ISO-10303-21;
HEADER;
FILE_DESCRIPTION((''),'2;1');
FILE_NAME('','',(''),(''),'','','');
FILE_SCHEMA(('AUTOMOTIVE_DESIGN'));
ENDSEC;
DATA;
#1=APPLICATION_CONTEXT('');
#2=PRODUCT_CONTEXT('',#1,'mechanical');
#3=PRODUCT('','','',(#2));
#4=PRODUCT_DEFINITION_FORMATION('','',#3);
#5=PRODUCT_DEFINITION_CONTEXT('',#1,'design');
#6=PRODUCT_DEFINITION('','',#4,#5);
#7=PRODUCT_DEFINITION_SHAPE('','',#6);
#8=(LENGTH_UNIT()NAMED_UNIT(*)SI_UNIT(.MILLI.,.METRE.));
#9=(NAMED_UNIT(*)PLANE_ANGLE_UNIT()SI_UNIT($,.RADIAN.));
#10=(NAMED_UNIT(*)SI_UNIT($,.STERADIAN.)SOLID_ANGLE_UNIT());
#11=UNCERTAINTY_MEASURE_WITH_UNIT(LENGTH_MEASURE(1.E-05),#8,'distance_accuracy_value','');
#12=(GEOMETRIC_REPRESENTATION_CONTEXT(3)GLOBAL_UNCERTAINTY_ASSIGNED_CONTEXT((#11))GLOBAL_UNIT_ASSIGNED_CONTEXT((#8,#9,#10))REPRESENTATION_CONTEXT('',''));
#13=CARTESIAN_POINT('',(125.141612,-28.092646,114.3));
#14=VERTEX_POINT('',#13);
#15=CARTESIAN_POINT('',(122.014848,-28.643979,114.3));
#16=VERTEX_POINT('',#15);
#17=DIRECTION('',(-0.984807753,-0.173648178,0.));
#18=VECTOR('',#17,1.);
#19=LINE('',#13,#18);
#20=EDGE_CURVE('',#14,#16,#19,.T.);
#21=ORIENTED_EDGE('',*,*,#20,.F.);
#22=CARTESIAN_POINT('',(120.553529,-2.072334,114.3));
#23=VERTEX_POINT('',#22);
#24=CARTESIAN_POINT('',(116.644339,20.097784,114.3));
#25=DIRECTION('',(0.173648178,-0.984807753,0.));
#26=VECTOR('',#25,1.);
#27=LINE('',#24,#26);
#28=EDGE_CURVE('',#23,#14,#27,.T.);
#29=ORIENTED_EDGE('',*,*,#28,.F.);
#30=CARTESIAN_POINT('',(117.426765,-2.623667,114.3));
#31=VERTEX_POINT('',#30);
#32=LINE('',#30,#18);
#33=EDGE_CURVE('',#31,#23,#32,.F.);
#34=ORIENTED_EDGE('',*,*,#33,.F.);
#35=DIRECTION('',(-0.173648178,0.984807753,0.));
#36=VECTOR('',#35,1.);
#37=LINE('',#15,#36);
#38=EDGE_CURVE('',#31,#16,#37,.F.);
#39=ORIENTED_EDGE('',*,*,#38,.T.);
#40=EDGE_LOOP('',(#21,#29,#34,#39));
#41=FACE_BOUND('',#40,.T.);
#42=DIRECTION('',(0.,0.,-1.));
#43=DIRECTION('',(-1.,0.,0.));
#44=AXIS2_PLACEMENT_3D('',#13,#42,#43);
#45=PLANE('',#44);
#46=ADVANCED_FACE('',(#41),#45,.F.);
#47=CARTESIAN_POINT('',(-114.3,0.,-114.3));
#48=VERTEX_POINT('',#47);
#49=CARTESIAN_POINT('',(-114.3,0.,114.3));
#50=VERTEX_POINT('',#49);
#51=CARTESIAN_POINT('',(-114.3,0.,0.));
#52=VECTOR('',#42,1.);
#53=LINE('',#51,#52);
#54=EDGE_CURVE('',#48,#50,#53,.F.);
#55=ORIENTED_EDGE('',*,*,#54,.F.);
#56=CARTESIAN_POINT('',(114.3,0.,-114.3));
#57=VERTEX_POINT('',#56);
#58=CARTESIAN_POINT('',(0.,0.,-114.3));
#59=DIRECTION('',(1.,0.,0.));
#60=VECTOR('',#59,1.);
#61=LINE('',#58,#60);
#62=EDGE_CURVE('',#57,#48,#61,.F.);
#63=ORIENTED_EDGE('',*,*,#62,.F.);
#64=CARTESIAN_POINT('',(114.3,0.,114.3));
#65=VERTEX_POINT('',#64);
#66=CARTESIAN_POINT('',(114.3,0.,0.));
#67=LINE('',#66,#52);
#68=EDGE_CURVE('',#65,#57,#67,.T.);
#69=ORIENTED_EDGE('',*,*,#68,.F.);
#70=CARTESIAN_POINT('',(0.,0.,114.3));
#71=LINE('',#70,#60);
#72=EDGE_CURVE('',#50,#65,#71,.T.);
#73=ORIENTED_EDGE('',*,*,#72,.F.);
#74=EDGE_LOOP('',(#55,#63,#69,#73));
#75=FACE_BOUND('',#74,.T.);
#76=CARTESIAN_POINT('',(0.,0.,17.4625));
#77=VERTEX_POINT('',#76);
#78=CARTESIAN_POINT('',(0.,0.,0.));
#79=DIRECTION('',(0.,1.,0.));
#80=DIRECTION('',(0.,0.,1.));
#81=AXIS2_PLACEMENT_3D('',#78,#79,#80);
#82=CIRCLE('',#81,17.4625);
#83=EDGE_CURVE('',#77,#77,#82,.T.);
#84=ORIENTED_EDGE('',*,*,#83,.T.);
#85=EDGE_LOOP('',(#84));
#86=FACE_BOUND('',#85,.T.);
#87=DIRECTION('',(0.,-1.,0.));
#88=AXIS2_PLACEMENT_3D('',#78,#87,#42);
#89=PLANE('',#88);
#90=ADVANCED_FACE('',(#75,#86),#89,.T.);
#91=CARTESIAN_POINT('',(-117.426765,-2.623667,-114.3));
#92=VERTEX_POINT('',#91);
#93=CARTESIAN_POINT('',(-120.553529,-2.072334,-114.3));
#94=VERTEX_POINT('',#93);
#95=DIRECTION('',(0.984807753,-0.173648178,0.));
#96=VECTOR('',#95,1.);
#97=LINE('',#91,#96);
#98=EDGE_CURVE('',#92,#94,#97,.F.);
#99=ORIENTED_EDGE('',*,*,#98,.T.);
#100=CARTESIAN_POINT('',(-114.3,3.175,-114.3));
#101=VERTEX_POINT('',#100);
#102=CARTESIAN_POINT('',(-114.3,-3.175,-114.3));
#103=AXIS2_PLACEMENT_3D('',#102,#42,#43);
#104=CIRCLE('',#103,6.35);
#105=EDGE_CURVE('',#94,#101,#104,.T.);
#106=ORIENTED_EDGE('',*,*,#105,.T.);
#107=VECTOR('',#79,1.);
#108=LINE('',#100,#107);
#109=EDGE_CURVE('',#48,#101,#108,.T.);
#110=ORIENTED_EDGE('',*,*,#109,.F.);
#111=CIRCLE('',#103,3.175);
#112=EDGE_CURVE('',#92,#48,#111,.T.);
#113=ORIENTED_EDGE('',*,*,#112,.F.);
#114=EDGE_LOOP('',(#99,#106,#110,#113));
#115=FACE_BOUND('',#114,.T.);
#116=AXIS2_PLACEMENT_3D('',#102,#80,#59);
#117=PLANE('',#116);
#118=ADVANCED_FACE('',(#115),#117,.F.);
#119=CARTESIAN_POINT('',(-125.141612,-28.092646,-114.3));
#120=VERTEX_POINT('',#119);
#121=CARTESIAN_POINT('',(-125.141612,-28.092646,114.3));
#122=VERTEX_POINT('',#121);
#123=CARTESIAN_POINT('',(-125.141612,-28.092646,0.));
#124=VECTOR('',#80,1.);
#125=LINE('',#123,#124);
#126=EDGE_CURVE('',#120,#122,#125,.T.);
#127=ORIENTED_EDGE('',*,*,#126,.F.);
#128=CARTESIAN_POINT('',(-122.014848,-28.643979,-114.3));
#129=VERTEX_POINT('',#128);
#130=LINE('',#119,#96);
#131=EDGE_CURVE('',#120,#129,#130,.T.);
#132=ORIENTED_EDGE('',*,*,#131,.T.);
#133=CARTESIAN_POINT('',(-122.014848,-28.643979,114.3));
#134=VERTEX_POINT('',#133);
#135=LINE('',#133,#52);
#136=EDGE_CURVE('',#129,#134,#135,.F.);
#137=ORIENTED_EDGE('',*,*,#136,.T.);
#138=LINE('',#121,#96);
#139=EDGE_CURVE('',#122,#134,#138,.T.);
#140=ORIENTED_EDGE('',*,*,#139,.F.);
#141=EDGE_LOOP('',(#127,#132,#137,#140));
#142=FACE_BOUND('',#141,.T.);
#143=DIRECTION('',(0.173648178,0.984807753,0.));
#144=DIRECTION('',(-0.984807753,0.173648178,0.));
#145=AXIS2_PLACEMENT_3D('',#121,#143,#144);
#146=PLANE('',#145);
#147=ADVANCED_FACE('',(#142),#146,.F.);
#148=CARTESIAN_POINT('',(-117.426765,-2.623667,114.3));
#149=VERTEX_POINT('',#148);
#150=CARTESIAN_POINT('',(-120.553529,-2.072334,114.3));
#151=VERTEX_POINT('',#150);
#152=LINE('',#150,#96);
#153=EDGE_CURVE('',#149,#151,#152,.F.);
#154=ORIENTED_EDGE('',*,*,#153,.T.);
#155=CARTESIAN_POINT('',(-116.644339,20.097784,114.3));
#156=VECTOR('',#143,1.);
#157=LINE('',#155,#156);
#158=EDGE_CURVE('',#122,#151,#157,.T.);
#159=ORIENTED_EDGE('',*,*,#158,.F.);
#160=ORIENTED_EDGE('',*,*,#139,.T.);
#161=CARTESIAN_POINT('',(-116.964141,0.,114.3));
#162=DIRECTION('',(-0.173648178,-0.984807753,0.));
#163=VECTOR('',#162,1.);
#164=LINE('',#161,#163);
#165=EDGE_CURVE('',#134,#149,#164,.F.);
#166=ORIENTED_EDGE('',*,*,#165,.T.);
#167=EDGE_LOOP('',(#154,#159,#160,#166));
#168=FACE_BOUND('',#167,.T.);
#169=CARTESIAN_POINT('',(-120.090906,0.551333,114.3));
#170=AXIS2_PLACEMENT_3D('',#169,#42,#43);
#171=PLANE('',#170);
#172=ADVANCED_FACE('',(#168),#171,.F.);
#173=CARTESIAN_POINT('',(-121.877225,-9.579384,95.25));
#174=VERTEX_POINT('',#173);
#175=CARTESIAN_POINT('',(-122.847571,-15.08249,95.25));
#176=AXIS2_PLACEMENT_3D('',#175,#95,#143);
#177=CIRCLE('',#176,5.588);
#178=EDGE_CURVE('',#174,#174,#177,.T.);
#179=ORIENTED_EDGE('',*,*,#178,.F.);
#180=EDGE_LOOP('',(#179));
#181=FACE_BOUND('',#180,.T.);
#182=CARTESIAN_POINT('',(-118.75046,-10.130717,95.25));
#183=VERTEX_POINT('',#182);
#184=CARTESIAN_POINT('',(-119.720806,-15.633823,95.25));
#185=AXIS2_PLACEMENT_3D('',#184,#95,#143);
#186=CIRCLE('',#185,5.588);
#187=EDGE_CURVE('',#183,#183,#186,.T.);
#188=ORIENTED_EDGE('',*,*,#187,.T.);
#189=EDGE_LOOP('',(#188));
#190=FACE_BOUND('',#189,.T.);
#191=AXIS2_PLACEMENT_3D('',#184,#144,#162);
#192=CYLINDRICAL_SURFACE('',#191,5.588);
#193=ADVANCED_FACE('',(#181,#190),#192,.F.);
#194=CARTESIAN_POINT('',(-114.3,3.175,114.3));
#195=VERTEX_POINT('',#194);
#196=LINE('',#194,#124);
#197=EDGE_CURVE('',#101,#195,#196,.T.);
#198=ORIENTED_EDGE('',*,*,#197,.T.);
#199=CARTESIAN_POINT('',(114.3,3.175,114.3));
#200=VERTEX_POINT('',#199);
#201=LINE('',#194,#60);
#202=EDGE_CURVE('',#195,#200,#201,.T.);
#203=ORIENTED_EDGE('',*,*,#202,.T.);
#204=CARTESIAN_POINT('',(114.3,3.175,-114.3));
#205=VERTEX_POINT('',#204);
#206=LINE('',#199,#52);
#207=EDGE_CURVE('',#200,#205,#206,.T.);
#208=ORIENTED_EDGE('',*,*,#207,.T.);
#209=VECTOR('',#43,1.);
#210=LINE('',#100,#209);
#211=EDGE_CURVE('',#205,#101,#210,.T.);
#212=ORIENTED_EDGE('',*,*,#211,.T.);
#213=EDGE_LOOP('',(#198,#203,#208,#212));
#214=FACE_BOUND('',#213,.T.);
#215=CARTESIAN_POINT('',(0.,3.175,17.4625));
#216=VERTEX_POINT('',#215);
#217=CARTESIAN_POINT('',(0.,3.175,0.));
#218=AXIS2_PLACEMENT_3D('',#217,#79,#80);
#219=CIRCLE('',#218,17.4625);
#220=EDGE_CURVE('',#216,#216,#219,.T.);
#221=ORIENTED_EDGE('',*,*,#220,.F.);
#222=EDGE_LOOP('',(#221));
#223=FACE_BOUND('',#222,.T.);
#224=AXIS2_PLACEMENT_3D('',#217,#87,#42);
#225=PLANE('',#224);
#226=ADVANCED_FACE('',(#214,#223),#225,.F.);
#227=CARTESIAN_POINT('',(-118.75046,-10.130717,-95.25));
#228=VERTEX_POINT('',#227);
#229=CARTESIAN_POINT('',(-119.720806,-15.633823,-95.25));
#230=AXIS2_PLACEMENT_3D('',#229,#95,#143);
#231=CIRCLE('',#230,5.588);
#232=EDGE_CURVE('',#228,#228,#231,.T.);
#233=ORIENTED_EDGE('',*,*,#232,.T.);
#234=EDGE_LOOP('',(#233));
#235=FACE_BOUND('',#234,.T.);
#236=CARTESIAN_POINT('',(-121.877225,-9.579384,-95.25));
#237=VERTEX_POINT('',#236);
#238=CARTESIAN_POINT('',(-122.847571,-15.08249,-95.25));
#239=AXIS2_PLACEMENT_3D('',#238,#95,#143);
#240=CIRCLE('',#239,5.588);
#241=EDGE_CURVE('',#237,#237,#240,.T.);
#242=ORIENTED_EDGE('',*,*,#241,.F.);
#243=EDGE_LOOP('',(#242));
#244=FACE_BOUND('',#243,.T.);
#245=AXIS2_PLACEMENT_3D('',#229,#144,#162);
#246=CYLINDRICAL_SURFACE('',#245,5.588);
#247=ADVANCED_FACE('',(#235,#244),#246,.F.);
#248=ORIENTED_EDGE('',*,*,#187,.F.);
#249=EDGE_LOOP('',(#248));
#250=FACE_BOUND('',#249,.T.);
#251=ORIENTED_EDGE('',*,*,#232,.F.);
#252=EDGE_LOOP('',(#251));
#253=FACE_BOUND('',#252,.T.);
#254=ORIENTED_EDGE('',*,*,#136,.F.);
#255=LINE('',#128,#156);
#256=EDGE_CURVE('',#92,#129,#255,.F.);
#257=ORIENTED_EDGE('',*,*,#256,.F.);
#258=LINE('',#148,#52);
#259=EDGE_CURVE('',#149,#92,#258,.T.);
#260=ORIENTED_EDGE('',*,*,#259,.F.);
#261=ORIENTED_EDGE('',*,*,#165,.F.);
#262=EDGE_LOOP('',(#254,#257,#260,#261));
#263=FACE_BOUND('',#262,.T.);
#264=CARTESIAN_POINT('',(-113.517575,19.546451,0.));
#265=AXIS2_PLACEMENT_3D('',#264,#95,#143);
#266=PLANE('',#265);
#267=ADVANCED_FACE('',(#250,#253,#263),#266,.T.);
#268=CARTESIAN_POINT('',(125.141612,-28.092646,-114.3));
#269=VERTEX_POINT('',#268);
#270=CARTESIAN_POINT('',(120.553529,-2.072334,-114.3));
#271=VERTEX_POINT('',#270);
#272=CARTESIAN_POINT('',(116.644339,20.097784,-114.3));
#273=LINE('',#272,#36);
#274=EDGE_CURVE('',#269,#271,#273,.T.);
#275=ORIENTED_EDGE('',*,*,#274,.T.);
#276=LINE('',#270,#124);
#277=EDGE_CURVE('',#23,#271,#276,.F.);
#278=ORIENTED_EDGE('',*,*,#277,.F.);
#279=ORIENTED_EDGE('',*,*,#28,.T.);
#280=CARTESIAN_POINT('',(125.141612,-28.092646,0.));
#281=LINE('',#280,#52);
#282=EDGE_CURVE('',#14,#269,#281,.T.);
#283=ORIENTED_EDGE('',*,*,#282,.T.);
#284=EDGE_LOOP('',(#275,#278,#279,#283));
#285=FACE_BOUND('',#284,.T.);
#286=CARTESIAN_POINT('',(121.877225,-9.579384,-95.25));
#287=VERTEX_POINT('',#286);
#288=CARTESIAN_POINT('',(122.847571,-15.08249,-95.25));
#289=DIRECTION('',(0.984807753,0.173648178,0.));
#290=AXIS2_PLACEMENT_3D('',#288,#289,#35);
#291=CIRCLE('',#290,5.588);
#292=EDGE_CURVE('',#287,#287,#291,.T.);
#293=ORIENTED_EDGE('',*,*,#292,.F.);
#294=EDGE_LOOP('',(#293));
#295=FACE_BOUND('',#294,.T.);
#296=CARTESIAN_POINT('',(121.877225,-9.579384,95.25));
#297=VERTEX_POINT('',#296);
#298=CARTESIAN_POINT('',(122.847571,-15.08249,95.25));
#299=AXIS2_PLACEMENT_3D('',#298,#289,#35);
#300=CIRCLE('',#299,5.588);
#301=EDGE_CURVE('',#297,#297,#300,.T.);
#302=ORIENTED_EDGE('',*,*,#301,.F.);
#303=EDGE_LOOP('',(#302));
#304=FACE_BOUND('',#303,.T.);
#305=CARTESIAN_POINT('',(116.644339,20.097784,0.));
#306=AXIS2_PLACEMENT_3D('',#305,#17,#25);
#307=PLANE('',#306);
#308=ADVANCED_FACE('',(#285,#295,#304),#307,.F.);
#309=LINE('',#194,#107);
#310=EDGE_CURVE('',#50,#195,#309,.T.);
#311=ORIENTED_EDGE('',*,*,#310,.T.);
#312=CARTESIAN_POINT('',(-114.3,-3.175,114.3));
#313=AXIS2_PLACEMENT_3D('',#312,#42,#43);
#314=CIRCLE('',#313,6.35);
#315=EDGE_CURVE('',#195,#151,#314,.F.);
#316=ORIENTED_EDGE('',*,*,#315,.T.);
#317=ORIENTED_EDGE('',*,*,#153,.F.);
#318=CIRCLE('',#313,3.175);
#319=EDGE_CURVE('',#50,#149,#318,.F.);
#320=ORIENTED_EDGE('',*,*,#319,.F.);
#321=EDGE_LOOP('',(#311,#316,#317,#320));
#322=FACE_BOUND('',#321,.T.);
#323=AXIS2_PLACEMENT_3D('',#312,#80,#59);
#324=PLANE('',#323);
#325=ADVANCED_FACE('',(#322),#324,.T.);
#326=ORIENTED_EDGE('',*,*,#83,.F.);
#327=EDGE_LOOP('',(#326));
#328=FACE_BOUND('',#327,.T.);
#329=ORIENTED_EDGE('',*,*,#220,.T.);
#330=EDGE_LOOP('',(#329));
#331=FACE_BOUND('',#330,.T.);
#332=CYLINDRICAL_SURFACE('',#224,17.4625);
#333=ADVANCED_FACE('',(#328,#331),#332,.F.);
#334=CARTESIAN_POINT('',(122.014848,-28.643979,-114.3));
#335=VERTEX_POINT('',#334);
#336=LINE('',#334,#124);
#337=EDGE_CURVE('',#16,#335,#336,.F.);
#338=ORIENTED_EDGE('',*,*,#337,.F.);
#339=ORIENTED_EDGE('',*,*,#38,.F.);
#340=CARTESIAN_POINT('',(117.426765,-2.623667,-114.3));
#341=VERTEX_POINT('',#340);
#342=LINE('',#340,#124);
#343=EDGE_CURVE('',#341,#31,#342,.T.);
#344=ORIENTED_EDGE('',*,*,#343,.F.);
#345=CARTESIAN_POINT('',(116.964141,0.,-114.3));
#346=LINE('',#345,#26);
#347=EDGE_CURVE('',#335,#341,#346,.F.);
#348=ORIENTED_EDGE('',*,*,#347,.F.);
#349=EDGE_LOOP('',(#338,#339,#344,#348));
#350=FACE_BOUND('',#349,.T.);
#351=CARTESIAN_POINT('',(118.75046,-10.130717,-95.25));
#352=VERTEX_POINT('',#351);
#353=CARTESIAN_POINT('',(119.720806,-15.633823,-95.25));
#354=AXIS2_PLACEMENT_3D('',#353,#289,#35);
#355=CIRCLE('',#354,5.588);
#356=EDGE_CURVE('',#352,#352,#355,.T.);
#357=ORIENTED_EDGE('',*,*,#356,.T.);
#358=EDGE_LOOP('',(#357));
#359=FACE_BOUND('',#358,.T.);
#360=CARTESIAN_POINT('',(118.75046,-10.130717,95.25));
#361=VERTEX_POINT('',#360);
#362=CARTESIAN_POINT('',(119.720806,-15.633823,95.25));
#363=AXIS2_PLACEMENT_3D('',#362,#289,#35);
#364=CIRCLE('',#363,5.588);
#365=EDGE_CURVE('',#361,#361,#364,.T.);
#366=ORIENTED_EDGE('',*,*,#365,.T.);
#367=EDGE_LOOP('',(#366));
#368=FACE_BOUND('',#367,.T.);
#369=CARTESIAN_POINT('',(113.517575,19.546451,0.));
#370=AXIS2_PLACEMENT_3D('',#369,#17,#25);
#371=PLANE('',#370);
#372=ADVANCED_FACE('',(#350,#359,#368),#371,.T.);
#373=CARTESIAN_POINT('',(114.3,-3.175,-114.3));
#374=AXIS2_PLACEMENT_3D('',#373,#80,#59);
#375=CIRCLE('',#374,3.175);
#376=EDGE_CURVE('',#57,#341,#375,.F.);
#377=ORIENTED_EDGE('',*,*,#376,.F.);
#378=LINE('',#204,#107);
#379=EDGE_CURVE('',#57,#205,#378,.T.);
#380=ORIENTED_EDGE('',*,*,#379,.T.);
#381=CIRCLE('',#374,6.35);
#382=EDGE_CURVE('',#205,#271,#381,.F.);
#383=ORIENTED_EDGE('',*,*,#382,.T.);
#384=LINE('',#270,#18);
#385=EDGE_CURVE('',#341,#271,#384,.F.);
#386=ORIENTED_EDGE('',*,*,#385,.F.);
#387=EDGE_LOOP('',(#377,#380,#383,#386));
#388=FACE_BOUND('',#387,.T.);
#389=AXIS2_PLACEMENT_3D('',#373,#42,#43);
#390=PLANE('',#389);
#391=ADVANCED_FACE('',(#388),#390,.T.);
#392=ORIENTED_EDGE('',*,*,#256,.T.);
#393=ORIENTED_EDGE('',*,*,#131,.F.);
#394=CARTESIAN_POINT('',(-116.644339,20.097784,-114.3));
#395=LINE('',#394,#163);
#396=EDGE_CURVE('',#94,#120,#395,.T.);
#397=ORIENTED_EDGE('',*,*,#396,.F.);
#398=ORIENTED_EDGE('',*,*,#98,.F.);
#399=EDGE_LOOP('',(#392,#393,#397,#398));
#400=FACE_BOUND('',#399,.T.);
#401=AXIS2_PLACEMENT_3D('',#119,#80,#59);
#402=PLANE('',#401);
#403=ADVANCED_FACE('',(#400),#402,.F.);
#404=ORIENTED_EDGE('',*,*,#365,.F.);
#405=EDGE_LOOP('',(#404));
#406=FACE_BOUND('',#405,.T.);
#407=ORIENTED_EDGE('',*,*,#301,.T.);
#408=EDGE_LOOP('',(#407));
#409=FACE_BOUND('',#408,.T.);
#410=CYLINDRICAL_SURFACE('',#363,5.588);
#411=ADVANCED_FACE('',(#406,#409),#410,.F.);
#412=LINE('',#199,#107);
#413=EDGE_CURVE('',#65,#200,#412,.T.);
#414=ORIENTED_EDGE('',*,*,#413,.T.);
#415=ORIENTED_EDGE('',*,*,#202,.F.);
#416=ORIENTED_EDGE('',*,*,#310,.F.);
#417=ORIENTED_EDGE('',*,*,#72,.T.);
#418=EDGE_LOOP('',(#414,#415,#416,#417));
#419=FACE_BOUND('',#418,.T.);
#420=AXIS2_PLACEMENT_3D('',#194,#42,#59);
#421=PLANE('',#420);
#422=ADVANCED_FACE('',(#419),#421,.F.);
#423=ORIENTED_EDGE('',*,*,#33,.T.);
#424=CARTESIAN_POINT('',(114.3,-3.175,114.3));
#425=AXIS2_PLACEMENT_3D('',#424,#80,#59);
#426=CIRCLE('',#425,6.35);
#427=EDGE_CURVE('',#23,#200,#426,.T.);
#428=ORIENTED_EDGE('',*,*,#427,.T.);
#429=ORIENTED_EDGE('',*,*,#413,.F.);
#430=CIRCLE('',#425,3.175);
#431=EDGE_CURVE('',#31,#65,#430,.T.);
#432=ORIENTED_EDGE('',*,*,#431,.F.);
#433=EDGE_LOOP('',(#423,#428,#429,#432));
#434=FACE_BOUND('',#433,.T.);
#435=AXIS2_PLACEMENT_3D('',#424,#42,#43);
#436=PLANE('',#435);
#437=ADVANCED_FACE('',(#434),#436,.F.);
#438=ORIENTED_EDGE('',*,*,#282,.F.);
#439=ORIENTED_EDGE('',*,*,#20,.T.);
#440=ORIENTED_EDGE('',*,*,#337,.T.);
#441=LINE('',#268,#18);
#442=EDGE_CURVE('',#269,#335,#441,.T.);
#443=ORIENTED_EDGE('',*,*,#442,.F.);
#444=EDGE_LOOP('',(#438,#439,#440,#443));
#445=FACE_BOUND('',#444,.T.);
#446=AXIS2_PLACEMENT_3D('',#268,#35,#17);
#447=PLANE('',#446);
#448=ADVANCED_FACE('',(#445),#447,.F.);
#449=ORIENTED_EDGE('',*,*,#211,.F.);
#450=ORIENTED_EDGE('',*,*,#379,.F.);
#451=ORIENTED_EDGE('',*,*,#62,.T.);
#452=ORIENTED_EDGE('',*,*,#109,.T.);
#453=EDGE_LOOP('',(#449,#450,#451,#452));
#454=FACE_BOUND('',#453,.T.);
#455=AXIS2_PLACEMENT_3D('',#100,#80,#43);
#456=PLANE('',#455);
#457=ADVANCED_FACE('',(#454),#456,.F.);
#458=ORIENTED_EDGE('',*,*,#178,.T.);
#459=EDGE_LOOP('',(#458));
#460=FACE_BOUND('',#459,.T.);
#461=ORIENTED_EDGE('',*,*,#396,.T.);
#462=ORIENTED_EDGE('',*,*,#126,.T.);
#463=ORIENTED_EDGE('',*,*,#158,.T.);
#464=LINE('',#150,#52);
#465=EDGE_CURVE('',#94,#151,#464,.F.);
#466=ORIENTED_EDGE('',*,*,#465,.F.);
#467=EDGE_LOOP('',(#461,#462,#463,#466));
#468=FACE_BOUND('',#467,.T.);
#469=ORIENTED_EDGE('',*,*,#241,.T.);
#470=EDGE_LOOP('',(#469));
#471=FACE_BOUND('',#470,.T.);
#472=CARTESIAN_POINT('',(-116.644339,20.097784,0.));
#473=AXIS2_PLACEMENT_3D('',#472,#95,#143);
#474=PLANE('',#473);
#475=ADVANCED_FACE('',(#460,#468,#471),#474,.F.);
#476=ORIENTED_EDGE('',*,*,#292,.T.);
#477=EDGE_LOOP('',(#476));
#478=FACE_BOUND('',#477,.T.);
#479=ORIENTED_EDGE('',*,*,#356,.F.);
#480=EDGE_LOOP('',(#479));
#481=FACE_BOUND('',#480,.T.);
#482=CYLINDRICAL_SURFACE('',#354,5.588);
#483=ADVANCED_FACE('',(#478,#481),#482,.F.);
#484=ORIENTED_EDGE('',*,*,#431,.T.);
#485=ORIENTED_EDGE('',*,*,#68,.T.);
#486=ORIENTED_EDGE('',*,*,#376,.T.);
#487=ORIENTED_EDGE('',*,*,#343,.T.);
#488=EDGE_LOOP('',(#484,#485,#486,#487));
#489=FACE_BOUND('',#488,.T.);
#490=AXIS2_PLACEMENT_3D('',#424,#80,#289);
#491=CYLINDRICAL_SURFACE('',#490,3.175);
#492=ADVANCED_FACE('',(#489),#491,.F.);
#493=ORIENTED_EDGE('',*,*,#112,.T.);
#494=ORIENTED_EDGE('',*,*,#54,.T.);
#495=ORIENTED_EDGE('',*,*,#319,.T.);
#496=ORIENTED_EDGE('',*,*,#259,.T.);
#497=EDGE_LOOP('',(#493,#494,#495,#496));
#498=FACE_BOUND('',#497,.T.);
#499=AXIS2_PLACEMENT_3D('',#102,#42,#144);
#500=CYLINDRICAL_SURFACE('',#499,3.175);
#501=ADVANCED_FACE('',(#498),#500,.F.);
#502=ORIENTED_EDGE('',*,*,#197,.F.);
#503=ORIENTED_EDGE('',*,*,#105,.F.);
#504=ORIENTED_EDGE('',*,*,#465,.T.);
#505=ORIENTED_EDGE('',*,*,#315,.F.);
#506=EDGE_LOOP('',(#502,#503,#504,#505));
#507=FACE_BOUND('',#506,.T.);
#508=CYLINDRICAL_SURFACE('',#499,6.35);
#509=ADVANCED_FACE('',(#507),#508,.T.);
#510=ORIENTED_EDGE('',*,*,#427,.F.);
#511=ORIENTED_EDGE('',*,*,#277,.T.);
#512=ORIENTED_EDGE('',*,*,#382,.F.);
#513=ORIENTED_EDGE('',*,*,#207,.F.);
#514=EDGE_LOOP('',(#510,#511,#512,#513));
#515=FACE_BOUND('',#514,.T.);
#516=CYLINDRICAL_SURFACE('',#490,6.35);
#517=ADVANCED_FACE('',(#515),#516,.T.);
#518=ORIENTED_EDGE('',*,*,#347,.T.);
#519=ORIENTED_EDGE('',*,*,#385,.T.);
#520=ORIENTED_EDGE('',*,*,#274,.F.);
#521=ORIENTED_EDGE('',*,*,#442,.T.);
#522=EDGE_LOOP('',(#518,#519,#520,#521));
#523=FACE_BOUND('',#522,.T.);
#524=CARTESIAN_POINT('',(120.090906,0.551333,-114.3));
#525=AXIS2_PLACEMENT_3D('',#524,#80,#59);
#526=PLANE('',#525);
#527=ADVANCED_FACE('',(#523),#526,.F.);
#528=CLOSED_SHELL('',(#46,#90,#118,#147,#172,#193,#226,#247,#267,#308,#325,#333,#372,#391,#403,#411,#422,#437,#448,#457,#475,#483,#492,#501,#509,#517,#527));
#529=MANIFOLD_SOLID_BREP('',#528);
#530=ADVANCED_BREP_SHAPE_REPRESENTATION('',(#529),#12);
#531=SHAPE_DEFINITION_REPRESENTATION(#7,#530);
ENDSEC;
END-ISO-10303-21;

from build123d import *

# Parameters (mm, degrees)
SKETCH5_W               = 228.6
SKETCH5_H               = 228.6
SKETCH5_R               = 17.4625
BOSS_EXTRUDE3_DEPTH     = 3.175
EDGE_FLANGE1_DEPTH      = 228.6
EDGE_FLANGE1_BEND_DEPTH = 228.6
SKETCH17_R              = 5.588
CUT_EXTRUDE1_DEPTH      = 3.175


# Sheet-metal steps are written as plain solids
with BuildPart() as part:
    # Sketch5 → Boss-Extrude3 (new body)
    with BuildSketch(Plane(origin=(0, 0, 0), x_dir=(1, 0, 0), z_dir=(0, 1, 0))):
        Rectangle(SKETCH5_W, SKETCH5_H)
        with Locations(Location((0, 0, 0), (0, 0, 270))):
            Circle(SKETCH5_R, mode=Mode.SUBTRACT)
    extrude(amount=BOSS_EXTRUDE3_DEPTH)

    # Edge-Flange1 section (across the edge) → Edge-Flange1 (add)
    with BuildSketch(Plane(origin=(116.964141329, 0, -114.3), x_dir=(-0.9848077530122075, -0.17364817766693427, 0), z_dir=(0, 0, 1))):
        with BuildLine():
            Line((-3.175, 2.664141329), (-3.175, 29.085858671))
            Line((-3.175, 29.085858671), (0, 29.085858671))
            Line((0, 29.085858671), (0, 2.664141329))
            ThreePointArc((0, 2.664141329), (0.742808893, 0.623290668), (2.623667036, -0.462623287))
            Line((2.623667036, -0.462623287), (2.072334072, -3.589387903))
            ThreePointArc((2.072334072, -3.589387903), (-1.689382214, -1.417559993), (-3.175, 2.664141329))
        make_face()
    extrude(amount=EDGE_FLANGE1_DEPTH)

    # Edge-Flange1 section 2 (across the edge) → Edge-Flange1 bend (add)
    with BuildSketch(Plane(origin=(-116.964141329, 0, 114.3), x_dir=(0.9848077530122075, -0.17364817766693427, 0), z_dir=(0, 0, -1))):
        with BuildLine():
            Line((-3.175, 2.664141329), (-3.175, 29.085858671))
            Line((-3.175, 29.085858671), (0, 29.085858671))
            Line((0, 29.085858671), (0, 2.664141329))
            ThreePointArc((0, 2.664141329), (0.742808893, 0.623290668), (2.623667036, -0.462623287))
            Line((2.623667036, -0.462623287), (2.072334072, -3.589387903))
            ThreePointArc((2.072334072, -3.589387903), (-1.689382214, -1.417559993), (-3.175, 2.664141329))
        make_face()
    extrude(amount=EDGE_FLANGE1_BEND_DEPTH)

    # Sketch17 → Cut-Extrude1 (cut)
    with BuildSketch(Plane(origin=(116.564005532, 20.553379155, 0), x_dir=(0, 0, -1), z_dir=(0.9848077530122075, 0.17364817766693408, 0))):
        with Locations(Location((-95.25, -36.185609994, 0), (0, 0, 90))):
            Circle(SKETCH17_R)
        with Locations(Location((95.25, -36.185609994, 0), (0, 0, 90))):
            Circle(SKETCH17_R)
    cut_extrude1 = extrude(amount=-CUT_EXTRUDE1_DEPTH, mode=Mode.SUBTRACT)

    # Mirror1: Cut-Extrude1 across plane
    add(cut_extrude1.mirror(Plane(origin=(0, 0, 0), x_dir=(0, 0, 1), z_dir=(1, 0, 0))), mode=Mode.SUBTRACT)


solid = part.part
